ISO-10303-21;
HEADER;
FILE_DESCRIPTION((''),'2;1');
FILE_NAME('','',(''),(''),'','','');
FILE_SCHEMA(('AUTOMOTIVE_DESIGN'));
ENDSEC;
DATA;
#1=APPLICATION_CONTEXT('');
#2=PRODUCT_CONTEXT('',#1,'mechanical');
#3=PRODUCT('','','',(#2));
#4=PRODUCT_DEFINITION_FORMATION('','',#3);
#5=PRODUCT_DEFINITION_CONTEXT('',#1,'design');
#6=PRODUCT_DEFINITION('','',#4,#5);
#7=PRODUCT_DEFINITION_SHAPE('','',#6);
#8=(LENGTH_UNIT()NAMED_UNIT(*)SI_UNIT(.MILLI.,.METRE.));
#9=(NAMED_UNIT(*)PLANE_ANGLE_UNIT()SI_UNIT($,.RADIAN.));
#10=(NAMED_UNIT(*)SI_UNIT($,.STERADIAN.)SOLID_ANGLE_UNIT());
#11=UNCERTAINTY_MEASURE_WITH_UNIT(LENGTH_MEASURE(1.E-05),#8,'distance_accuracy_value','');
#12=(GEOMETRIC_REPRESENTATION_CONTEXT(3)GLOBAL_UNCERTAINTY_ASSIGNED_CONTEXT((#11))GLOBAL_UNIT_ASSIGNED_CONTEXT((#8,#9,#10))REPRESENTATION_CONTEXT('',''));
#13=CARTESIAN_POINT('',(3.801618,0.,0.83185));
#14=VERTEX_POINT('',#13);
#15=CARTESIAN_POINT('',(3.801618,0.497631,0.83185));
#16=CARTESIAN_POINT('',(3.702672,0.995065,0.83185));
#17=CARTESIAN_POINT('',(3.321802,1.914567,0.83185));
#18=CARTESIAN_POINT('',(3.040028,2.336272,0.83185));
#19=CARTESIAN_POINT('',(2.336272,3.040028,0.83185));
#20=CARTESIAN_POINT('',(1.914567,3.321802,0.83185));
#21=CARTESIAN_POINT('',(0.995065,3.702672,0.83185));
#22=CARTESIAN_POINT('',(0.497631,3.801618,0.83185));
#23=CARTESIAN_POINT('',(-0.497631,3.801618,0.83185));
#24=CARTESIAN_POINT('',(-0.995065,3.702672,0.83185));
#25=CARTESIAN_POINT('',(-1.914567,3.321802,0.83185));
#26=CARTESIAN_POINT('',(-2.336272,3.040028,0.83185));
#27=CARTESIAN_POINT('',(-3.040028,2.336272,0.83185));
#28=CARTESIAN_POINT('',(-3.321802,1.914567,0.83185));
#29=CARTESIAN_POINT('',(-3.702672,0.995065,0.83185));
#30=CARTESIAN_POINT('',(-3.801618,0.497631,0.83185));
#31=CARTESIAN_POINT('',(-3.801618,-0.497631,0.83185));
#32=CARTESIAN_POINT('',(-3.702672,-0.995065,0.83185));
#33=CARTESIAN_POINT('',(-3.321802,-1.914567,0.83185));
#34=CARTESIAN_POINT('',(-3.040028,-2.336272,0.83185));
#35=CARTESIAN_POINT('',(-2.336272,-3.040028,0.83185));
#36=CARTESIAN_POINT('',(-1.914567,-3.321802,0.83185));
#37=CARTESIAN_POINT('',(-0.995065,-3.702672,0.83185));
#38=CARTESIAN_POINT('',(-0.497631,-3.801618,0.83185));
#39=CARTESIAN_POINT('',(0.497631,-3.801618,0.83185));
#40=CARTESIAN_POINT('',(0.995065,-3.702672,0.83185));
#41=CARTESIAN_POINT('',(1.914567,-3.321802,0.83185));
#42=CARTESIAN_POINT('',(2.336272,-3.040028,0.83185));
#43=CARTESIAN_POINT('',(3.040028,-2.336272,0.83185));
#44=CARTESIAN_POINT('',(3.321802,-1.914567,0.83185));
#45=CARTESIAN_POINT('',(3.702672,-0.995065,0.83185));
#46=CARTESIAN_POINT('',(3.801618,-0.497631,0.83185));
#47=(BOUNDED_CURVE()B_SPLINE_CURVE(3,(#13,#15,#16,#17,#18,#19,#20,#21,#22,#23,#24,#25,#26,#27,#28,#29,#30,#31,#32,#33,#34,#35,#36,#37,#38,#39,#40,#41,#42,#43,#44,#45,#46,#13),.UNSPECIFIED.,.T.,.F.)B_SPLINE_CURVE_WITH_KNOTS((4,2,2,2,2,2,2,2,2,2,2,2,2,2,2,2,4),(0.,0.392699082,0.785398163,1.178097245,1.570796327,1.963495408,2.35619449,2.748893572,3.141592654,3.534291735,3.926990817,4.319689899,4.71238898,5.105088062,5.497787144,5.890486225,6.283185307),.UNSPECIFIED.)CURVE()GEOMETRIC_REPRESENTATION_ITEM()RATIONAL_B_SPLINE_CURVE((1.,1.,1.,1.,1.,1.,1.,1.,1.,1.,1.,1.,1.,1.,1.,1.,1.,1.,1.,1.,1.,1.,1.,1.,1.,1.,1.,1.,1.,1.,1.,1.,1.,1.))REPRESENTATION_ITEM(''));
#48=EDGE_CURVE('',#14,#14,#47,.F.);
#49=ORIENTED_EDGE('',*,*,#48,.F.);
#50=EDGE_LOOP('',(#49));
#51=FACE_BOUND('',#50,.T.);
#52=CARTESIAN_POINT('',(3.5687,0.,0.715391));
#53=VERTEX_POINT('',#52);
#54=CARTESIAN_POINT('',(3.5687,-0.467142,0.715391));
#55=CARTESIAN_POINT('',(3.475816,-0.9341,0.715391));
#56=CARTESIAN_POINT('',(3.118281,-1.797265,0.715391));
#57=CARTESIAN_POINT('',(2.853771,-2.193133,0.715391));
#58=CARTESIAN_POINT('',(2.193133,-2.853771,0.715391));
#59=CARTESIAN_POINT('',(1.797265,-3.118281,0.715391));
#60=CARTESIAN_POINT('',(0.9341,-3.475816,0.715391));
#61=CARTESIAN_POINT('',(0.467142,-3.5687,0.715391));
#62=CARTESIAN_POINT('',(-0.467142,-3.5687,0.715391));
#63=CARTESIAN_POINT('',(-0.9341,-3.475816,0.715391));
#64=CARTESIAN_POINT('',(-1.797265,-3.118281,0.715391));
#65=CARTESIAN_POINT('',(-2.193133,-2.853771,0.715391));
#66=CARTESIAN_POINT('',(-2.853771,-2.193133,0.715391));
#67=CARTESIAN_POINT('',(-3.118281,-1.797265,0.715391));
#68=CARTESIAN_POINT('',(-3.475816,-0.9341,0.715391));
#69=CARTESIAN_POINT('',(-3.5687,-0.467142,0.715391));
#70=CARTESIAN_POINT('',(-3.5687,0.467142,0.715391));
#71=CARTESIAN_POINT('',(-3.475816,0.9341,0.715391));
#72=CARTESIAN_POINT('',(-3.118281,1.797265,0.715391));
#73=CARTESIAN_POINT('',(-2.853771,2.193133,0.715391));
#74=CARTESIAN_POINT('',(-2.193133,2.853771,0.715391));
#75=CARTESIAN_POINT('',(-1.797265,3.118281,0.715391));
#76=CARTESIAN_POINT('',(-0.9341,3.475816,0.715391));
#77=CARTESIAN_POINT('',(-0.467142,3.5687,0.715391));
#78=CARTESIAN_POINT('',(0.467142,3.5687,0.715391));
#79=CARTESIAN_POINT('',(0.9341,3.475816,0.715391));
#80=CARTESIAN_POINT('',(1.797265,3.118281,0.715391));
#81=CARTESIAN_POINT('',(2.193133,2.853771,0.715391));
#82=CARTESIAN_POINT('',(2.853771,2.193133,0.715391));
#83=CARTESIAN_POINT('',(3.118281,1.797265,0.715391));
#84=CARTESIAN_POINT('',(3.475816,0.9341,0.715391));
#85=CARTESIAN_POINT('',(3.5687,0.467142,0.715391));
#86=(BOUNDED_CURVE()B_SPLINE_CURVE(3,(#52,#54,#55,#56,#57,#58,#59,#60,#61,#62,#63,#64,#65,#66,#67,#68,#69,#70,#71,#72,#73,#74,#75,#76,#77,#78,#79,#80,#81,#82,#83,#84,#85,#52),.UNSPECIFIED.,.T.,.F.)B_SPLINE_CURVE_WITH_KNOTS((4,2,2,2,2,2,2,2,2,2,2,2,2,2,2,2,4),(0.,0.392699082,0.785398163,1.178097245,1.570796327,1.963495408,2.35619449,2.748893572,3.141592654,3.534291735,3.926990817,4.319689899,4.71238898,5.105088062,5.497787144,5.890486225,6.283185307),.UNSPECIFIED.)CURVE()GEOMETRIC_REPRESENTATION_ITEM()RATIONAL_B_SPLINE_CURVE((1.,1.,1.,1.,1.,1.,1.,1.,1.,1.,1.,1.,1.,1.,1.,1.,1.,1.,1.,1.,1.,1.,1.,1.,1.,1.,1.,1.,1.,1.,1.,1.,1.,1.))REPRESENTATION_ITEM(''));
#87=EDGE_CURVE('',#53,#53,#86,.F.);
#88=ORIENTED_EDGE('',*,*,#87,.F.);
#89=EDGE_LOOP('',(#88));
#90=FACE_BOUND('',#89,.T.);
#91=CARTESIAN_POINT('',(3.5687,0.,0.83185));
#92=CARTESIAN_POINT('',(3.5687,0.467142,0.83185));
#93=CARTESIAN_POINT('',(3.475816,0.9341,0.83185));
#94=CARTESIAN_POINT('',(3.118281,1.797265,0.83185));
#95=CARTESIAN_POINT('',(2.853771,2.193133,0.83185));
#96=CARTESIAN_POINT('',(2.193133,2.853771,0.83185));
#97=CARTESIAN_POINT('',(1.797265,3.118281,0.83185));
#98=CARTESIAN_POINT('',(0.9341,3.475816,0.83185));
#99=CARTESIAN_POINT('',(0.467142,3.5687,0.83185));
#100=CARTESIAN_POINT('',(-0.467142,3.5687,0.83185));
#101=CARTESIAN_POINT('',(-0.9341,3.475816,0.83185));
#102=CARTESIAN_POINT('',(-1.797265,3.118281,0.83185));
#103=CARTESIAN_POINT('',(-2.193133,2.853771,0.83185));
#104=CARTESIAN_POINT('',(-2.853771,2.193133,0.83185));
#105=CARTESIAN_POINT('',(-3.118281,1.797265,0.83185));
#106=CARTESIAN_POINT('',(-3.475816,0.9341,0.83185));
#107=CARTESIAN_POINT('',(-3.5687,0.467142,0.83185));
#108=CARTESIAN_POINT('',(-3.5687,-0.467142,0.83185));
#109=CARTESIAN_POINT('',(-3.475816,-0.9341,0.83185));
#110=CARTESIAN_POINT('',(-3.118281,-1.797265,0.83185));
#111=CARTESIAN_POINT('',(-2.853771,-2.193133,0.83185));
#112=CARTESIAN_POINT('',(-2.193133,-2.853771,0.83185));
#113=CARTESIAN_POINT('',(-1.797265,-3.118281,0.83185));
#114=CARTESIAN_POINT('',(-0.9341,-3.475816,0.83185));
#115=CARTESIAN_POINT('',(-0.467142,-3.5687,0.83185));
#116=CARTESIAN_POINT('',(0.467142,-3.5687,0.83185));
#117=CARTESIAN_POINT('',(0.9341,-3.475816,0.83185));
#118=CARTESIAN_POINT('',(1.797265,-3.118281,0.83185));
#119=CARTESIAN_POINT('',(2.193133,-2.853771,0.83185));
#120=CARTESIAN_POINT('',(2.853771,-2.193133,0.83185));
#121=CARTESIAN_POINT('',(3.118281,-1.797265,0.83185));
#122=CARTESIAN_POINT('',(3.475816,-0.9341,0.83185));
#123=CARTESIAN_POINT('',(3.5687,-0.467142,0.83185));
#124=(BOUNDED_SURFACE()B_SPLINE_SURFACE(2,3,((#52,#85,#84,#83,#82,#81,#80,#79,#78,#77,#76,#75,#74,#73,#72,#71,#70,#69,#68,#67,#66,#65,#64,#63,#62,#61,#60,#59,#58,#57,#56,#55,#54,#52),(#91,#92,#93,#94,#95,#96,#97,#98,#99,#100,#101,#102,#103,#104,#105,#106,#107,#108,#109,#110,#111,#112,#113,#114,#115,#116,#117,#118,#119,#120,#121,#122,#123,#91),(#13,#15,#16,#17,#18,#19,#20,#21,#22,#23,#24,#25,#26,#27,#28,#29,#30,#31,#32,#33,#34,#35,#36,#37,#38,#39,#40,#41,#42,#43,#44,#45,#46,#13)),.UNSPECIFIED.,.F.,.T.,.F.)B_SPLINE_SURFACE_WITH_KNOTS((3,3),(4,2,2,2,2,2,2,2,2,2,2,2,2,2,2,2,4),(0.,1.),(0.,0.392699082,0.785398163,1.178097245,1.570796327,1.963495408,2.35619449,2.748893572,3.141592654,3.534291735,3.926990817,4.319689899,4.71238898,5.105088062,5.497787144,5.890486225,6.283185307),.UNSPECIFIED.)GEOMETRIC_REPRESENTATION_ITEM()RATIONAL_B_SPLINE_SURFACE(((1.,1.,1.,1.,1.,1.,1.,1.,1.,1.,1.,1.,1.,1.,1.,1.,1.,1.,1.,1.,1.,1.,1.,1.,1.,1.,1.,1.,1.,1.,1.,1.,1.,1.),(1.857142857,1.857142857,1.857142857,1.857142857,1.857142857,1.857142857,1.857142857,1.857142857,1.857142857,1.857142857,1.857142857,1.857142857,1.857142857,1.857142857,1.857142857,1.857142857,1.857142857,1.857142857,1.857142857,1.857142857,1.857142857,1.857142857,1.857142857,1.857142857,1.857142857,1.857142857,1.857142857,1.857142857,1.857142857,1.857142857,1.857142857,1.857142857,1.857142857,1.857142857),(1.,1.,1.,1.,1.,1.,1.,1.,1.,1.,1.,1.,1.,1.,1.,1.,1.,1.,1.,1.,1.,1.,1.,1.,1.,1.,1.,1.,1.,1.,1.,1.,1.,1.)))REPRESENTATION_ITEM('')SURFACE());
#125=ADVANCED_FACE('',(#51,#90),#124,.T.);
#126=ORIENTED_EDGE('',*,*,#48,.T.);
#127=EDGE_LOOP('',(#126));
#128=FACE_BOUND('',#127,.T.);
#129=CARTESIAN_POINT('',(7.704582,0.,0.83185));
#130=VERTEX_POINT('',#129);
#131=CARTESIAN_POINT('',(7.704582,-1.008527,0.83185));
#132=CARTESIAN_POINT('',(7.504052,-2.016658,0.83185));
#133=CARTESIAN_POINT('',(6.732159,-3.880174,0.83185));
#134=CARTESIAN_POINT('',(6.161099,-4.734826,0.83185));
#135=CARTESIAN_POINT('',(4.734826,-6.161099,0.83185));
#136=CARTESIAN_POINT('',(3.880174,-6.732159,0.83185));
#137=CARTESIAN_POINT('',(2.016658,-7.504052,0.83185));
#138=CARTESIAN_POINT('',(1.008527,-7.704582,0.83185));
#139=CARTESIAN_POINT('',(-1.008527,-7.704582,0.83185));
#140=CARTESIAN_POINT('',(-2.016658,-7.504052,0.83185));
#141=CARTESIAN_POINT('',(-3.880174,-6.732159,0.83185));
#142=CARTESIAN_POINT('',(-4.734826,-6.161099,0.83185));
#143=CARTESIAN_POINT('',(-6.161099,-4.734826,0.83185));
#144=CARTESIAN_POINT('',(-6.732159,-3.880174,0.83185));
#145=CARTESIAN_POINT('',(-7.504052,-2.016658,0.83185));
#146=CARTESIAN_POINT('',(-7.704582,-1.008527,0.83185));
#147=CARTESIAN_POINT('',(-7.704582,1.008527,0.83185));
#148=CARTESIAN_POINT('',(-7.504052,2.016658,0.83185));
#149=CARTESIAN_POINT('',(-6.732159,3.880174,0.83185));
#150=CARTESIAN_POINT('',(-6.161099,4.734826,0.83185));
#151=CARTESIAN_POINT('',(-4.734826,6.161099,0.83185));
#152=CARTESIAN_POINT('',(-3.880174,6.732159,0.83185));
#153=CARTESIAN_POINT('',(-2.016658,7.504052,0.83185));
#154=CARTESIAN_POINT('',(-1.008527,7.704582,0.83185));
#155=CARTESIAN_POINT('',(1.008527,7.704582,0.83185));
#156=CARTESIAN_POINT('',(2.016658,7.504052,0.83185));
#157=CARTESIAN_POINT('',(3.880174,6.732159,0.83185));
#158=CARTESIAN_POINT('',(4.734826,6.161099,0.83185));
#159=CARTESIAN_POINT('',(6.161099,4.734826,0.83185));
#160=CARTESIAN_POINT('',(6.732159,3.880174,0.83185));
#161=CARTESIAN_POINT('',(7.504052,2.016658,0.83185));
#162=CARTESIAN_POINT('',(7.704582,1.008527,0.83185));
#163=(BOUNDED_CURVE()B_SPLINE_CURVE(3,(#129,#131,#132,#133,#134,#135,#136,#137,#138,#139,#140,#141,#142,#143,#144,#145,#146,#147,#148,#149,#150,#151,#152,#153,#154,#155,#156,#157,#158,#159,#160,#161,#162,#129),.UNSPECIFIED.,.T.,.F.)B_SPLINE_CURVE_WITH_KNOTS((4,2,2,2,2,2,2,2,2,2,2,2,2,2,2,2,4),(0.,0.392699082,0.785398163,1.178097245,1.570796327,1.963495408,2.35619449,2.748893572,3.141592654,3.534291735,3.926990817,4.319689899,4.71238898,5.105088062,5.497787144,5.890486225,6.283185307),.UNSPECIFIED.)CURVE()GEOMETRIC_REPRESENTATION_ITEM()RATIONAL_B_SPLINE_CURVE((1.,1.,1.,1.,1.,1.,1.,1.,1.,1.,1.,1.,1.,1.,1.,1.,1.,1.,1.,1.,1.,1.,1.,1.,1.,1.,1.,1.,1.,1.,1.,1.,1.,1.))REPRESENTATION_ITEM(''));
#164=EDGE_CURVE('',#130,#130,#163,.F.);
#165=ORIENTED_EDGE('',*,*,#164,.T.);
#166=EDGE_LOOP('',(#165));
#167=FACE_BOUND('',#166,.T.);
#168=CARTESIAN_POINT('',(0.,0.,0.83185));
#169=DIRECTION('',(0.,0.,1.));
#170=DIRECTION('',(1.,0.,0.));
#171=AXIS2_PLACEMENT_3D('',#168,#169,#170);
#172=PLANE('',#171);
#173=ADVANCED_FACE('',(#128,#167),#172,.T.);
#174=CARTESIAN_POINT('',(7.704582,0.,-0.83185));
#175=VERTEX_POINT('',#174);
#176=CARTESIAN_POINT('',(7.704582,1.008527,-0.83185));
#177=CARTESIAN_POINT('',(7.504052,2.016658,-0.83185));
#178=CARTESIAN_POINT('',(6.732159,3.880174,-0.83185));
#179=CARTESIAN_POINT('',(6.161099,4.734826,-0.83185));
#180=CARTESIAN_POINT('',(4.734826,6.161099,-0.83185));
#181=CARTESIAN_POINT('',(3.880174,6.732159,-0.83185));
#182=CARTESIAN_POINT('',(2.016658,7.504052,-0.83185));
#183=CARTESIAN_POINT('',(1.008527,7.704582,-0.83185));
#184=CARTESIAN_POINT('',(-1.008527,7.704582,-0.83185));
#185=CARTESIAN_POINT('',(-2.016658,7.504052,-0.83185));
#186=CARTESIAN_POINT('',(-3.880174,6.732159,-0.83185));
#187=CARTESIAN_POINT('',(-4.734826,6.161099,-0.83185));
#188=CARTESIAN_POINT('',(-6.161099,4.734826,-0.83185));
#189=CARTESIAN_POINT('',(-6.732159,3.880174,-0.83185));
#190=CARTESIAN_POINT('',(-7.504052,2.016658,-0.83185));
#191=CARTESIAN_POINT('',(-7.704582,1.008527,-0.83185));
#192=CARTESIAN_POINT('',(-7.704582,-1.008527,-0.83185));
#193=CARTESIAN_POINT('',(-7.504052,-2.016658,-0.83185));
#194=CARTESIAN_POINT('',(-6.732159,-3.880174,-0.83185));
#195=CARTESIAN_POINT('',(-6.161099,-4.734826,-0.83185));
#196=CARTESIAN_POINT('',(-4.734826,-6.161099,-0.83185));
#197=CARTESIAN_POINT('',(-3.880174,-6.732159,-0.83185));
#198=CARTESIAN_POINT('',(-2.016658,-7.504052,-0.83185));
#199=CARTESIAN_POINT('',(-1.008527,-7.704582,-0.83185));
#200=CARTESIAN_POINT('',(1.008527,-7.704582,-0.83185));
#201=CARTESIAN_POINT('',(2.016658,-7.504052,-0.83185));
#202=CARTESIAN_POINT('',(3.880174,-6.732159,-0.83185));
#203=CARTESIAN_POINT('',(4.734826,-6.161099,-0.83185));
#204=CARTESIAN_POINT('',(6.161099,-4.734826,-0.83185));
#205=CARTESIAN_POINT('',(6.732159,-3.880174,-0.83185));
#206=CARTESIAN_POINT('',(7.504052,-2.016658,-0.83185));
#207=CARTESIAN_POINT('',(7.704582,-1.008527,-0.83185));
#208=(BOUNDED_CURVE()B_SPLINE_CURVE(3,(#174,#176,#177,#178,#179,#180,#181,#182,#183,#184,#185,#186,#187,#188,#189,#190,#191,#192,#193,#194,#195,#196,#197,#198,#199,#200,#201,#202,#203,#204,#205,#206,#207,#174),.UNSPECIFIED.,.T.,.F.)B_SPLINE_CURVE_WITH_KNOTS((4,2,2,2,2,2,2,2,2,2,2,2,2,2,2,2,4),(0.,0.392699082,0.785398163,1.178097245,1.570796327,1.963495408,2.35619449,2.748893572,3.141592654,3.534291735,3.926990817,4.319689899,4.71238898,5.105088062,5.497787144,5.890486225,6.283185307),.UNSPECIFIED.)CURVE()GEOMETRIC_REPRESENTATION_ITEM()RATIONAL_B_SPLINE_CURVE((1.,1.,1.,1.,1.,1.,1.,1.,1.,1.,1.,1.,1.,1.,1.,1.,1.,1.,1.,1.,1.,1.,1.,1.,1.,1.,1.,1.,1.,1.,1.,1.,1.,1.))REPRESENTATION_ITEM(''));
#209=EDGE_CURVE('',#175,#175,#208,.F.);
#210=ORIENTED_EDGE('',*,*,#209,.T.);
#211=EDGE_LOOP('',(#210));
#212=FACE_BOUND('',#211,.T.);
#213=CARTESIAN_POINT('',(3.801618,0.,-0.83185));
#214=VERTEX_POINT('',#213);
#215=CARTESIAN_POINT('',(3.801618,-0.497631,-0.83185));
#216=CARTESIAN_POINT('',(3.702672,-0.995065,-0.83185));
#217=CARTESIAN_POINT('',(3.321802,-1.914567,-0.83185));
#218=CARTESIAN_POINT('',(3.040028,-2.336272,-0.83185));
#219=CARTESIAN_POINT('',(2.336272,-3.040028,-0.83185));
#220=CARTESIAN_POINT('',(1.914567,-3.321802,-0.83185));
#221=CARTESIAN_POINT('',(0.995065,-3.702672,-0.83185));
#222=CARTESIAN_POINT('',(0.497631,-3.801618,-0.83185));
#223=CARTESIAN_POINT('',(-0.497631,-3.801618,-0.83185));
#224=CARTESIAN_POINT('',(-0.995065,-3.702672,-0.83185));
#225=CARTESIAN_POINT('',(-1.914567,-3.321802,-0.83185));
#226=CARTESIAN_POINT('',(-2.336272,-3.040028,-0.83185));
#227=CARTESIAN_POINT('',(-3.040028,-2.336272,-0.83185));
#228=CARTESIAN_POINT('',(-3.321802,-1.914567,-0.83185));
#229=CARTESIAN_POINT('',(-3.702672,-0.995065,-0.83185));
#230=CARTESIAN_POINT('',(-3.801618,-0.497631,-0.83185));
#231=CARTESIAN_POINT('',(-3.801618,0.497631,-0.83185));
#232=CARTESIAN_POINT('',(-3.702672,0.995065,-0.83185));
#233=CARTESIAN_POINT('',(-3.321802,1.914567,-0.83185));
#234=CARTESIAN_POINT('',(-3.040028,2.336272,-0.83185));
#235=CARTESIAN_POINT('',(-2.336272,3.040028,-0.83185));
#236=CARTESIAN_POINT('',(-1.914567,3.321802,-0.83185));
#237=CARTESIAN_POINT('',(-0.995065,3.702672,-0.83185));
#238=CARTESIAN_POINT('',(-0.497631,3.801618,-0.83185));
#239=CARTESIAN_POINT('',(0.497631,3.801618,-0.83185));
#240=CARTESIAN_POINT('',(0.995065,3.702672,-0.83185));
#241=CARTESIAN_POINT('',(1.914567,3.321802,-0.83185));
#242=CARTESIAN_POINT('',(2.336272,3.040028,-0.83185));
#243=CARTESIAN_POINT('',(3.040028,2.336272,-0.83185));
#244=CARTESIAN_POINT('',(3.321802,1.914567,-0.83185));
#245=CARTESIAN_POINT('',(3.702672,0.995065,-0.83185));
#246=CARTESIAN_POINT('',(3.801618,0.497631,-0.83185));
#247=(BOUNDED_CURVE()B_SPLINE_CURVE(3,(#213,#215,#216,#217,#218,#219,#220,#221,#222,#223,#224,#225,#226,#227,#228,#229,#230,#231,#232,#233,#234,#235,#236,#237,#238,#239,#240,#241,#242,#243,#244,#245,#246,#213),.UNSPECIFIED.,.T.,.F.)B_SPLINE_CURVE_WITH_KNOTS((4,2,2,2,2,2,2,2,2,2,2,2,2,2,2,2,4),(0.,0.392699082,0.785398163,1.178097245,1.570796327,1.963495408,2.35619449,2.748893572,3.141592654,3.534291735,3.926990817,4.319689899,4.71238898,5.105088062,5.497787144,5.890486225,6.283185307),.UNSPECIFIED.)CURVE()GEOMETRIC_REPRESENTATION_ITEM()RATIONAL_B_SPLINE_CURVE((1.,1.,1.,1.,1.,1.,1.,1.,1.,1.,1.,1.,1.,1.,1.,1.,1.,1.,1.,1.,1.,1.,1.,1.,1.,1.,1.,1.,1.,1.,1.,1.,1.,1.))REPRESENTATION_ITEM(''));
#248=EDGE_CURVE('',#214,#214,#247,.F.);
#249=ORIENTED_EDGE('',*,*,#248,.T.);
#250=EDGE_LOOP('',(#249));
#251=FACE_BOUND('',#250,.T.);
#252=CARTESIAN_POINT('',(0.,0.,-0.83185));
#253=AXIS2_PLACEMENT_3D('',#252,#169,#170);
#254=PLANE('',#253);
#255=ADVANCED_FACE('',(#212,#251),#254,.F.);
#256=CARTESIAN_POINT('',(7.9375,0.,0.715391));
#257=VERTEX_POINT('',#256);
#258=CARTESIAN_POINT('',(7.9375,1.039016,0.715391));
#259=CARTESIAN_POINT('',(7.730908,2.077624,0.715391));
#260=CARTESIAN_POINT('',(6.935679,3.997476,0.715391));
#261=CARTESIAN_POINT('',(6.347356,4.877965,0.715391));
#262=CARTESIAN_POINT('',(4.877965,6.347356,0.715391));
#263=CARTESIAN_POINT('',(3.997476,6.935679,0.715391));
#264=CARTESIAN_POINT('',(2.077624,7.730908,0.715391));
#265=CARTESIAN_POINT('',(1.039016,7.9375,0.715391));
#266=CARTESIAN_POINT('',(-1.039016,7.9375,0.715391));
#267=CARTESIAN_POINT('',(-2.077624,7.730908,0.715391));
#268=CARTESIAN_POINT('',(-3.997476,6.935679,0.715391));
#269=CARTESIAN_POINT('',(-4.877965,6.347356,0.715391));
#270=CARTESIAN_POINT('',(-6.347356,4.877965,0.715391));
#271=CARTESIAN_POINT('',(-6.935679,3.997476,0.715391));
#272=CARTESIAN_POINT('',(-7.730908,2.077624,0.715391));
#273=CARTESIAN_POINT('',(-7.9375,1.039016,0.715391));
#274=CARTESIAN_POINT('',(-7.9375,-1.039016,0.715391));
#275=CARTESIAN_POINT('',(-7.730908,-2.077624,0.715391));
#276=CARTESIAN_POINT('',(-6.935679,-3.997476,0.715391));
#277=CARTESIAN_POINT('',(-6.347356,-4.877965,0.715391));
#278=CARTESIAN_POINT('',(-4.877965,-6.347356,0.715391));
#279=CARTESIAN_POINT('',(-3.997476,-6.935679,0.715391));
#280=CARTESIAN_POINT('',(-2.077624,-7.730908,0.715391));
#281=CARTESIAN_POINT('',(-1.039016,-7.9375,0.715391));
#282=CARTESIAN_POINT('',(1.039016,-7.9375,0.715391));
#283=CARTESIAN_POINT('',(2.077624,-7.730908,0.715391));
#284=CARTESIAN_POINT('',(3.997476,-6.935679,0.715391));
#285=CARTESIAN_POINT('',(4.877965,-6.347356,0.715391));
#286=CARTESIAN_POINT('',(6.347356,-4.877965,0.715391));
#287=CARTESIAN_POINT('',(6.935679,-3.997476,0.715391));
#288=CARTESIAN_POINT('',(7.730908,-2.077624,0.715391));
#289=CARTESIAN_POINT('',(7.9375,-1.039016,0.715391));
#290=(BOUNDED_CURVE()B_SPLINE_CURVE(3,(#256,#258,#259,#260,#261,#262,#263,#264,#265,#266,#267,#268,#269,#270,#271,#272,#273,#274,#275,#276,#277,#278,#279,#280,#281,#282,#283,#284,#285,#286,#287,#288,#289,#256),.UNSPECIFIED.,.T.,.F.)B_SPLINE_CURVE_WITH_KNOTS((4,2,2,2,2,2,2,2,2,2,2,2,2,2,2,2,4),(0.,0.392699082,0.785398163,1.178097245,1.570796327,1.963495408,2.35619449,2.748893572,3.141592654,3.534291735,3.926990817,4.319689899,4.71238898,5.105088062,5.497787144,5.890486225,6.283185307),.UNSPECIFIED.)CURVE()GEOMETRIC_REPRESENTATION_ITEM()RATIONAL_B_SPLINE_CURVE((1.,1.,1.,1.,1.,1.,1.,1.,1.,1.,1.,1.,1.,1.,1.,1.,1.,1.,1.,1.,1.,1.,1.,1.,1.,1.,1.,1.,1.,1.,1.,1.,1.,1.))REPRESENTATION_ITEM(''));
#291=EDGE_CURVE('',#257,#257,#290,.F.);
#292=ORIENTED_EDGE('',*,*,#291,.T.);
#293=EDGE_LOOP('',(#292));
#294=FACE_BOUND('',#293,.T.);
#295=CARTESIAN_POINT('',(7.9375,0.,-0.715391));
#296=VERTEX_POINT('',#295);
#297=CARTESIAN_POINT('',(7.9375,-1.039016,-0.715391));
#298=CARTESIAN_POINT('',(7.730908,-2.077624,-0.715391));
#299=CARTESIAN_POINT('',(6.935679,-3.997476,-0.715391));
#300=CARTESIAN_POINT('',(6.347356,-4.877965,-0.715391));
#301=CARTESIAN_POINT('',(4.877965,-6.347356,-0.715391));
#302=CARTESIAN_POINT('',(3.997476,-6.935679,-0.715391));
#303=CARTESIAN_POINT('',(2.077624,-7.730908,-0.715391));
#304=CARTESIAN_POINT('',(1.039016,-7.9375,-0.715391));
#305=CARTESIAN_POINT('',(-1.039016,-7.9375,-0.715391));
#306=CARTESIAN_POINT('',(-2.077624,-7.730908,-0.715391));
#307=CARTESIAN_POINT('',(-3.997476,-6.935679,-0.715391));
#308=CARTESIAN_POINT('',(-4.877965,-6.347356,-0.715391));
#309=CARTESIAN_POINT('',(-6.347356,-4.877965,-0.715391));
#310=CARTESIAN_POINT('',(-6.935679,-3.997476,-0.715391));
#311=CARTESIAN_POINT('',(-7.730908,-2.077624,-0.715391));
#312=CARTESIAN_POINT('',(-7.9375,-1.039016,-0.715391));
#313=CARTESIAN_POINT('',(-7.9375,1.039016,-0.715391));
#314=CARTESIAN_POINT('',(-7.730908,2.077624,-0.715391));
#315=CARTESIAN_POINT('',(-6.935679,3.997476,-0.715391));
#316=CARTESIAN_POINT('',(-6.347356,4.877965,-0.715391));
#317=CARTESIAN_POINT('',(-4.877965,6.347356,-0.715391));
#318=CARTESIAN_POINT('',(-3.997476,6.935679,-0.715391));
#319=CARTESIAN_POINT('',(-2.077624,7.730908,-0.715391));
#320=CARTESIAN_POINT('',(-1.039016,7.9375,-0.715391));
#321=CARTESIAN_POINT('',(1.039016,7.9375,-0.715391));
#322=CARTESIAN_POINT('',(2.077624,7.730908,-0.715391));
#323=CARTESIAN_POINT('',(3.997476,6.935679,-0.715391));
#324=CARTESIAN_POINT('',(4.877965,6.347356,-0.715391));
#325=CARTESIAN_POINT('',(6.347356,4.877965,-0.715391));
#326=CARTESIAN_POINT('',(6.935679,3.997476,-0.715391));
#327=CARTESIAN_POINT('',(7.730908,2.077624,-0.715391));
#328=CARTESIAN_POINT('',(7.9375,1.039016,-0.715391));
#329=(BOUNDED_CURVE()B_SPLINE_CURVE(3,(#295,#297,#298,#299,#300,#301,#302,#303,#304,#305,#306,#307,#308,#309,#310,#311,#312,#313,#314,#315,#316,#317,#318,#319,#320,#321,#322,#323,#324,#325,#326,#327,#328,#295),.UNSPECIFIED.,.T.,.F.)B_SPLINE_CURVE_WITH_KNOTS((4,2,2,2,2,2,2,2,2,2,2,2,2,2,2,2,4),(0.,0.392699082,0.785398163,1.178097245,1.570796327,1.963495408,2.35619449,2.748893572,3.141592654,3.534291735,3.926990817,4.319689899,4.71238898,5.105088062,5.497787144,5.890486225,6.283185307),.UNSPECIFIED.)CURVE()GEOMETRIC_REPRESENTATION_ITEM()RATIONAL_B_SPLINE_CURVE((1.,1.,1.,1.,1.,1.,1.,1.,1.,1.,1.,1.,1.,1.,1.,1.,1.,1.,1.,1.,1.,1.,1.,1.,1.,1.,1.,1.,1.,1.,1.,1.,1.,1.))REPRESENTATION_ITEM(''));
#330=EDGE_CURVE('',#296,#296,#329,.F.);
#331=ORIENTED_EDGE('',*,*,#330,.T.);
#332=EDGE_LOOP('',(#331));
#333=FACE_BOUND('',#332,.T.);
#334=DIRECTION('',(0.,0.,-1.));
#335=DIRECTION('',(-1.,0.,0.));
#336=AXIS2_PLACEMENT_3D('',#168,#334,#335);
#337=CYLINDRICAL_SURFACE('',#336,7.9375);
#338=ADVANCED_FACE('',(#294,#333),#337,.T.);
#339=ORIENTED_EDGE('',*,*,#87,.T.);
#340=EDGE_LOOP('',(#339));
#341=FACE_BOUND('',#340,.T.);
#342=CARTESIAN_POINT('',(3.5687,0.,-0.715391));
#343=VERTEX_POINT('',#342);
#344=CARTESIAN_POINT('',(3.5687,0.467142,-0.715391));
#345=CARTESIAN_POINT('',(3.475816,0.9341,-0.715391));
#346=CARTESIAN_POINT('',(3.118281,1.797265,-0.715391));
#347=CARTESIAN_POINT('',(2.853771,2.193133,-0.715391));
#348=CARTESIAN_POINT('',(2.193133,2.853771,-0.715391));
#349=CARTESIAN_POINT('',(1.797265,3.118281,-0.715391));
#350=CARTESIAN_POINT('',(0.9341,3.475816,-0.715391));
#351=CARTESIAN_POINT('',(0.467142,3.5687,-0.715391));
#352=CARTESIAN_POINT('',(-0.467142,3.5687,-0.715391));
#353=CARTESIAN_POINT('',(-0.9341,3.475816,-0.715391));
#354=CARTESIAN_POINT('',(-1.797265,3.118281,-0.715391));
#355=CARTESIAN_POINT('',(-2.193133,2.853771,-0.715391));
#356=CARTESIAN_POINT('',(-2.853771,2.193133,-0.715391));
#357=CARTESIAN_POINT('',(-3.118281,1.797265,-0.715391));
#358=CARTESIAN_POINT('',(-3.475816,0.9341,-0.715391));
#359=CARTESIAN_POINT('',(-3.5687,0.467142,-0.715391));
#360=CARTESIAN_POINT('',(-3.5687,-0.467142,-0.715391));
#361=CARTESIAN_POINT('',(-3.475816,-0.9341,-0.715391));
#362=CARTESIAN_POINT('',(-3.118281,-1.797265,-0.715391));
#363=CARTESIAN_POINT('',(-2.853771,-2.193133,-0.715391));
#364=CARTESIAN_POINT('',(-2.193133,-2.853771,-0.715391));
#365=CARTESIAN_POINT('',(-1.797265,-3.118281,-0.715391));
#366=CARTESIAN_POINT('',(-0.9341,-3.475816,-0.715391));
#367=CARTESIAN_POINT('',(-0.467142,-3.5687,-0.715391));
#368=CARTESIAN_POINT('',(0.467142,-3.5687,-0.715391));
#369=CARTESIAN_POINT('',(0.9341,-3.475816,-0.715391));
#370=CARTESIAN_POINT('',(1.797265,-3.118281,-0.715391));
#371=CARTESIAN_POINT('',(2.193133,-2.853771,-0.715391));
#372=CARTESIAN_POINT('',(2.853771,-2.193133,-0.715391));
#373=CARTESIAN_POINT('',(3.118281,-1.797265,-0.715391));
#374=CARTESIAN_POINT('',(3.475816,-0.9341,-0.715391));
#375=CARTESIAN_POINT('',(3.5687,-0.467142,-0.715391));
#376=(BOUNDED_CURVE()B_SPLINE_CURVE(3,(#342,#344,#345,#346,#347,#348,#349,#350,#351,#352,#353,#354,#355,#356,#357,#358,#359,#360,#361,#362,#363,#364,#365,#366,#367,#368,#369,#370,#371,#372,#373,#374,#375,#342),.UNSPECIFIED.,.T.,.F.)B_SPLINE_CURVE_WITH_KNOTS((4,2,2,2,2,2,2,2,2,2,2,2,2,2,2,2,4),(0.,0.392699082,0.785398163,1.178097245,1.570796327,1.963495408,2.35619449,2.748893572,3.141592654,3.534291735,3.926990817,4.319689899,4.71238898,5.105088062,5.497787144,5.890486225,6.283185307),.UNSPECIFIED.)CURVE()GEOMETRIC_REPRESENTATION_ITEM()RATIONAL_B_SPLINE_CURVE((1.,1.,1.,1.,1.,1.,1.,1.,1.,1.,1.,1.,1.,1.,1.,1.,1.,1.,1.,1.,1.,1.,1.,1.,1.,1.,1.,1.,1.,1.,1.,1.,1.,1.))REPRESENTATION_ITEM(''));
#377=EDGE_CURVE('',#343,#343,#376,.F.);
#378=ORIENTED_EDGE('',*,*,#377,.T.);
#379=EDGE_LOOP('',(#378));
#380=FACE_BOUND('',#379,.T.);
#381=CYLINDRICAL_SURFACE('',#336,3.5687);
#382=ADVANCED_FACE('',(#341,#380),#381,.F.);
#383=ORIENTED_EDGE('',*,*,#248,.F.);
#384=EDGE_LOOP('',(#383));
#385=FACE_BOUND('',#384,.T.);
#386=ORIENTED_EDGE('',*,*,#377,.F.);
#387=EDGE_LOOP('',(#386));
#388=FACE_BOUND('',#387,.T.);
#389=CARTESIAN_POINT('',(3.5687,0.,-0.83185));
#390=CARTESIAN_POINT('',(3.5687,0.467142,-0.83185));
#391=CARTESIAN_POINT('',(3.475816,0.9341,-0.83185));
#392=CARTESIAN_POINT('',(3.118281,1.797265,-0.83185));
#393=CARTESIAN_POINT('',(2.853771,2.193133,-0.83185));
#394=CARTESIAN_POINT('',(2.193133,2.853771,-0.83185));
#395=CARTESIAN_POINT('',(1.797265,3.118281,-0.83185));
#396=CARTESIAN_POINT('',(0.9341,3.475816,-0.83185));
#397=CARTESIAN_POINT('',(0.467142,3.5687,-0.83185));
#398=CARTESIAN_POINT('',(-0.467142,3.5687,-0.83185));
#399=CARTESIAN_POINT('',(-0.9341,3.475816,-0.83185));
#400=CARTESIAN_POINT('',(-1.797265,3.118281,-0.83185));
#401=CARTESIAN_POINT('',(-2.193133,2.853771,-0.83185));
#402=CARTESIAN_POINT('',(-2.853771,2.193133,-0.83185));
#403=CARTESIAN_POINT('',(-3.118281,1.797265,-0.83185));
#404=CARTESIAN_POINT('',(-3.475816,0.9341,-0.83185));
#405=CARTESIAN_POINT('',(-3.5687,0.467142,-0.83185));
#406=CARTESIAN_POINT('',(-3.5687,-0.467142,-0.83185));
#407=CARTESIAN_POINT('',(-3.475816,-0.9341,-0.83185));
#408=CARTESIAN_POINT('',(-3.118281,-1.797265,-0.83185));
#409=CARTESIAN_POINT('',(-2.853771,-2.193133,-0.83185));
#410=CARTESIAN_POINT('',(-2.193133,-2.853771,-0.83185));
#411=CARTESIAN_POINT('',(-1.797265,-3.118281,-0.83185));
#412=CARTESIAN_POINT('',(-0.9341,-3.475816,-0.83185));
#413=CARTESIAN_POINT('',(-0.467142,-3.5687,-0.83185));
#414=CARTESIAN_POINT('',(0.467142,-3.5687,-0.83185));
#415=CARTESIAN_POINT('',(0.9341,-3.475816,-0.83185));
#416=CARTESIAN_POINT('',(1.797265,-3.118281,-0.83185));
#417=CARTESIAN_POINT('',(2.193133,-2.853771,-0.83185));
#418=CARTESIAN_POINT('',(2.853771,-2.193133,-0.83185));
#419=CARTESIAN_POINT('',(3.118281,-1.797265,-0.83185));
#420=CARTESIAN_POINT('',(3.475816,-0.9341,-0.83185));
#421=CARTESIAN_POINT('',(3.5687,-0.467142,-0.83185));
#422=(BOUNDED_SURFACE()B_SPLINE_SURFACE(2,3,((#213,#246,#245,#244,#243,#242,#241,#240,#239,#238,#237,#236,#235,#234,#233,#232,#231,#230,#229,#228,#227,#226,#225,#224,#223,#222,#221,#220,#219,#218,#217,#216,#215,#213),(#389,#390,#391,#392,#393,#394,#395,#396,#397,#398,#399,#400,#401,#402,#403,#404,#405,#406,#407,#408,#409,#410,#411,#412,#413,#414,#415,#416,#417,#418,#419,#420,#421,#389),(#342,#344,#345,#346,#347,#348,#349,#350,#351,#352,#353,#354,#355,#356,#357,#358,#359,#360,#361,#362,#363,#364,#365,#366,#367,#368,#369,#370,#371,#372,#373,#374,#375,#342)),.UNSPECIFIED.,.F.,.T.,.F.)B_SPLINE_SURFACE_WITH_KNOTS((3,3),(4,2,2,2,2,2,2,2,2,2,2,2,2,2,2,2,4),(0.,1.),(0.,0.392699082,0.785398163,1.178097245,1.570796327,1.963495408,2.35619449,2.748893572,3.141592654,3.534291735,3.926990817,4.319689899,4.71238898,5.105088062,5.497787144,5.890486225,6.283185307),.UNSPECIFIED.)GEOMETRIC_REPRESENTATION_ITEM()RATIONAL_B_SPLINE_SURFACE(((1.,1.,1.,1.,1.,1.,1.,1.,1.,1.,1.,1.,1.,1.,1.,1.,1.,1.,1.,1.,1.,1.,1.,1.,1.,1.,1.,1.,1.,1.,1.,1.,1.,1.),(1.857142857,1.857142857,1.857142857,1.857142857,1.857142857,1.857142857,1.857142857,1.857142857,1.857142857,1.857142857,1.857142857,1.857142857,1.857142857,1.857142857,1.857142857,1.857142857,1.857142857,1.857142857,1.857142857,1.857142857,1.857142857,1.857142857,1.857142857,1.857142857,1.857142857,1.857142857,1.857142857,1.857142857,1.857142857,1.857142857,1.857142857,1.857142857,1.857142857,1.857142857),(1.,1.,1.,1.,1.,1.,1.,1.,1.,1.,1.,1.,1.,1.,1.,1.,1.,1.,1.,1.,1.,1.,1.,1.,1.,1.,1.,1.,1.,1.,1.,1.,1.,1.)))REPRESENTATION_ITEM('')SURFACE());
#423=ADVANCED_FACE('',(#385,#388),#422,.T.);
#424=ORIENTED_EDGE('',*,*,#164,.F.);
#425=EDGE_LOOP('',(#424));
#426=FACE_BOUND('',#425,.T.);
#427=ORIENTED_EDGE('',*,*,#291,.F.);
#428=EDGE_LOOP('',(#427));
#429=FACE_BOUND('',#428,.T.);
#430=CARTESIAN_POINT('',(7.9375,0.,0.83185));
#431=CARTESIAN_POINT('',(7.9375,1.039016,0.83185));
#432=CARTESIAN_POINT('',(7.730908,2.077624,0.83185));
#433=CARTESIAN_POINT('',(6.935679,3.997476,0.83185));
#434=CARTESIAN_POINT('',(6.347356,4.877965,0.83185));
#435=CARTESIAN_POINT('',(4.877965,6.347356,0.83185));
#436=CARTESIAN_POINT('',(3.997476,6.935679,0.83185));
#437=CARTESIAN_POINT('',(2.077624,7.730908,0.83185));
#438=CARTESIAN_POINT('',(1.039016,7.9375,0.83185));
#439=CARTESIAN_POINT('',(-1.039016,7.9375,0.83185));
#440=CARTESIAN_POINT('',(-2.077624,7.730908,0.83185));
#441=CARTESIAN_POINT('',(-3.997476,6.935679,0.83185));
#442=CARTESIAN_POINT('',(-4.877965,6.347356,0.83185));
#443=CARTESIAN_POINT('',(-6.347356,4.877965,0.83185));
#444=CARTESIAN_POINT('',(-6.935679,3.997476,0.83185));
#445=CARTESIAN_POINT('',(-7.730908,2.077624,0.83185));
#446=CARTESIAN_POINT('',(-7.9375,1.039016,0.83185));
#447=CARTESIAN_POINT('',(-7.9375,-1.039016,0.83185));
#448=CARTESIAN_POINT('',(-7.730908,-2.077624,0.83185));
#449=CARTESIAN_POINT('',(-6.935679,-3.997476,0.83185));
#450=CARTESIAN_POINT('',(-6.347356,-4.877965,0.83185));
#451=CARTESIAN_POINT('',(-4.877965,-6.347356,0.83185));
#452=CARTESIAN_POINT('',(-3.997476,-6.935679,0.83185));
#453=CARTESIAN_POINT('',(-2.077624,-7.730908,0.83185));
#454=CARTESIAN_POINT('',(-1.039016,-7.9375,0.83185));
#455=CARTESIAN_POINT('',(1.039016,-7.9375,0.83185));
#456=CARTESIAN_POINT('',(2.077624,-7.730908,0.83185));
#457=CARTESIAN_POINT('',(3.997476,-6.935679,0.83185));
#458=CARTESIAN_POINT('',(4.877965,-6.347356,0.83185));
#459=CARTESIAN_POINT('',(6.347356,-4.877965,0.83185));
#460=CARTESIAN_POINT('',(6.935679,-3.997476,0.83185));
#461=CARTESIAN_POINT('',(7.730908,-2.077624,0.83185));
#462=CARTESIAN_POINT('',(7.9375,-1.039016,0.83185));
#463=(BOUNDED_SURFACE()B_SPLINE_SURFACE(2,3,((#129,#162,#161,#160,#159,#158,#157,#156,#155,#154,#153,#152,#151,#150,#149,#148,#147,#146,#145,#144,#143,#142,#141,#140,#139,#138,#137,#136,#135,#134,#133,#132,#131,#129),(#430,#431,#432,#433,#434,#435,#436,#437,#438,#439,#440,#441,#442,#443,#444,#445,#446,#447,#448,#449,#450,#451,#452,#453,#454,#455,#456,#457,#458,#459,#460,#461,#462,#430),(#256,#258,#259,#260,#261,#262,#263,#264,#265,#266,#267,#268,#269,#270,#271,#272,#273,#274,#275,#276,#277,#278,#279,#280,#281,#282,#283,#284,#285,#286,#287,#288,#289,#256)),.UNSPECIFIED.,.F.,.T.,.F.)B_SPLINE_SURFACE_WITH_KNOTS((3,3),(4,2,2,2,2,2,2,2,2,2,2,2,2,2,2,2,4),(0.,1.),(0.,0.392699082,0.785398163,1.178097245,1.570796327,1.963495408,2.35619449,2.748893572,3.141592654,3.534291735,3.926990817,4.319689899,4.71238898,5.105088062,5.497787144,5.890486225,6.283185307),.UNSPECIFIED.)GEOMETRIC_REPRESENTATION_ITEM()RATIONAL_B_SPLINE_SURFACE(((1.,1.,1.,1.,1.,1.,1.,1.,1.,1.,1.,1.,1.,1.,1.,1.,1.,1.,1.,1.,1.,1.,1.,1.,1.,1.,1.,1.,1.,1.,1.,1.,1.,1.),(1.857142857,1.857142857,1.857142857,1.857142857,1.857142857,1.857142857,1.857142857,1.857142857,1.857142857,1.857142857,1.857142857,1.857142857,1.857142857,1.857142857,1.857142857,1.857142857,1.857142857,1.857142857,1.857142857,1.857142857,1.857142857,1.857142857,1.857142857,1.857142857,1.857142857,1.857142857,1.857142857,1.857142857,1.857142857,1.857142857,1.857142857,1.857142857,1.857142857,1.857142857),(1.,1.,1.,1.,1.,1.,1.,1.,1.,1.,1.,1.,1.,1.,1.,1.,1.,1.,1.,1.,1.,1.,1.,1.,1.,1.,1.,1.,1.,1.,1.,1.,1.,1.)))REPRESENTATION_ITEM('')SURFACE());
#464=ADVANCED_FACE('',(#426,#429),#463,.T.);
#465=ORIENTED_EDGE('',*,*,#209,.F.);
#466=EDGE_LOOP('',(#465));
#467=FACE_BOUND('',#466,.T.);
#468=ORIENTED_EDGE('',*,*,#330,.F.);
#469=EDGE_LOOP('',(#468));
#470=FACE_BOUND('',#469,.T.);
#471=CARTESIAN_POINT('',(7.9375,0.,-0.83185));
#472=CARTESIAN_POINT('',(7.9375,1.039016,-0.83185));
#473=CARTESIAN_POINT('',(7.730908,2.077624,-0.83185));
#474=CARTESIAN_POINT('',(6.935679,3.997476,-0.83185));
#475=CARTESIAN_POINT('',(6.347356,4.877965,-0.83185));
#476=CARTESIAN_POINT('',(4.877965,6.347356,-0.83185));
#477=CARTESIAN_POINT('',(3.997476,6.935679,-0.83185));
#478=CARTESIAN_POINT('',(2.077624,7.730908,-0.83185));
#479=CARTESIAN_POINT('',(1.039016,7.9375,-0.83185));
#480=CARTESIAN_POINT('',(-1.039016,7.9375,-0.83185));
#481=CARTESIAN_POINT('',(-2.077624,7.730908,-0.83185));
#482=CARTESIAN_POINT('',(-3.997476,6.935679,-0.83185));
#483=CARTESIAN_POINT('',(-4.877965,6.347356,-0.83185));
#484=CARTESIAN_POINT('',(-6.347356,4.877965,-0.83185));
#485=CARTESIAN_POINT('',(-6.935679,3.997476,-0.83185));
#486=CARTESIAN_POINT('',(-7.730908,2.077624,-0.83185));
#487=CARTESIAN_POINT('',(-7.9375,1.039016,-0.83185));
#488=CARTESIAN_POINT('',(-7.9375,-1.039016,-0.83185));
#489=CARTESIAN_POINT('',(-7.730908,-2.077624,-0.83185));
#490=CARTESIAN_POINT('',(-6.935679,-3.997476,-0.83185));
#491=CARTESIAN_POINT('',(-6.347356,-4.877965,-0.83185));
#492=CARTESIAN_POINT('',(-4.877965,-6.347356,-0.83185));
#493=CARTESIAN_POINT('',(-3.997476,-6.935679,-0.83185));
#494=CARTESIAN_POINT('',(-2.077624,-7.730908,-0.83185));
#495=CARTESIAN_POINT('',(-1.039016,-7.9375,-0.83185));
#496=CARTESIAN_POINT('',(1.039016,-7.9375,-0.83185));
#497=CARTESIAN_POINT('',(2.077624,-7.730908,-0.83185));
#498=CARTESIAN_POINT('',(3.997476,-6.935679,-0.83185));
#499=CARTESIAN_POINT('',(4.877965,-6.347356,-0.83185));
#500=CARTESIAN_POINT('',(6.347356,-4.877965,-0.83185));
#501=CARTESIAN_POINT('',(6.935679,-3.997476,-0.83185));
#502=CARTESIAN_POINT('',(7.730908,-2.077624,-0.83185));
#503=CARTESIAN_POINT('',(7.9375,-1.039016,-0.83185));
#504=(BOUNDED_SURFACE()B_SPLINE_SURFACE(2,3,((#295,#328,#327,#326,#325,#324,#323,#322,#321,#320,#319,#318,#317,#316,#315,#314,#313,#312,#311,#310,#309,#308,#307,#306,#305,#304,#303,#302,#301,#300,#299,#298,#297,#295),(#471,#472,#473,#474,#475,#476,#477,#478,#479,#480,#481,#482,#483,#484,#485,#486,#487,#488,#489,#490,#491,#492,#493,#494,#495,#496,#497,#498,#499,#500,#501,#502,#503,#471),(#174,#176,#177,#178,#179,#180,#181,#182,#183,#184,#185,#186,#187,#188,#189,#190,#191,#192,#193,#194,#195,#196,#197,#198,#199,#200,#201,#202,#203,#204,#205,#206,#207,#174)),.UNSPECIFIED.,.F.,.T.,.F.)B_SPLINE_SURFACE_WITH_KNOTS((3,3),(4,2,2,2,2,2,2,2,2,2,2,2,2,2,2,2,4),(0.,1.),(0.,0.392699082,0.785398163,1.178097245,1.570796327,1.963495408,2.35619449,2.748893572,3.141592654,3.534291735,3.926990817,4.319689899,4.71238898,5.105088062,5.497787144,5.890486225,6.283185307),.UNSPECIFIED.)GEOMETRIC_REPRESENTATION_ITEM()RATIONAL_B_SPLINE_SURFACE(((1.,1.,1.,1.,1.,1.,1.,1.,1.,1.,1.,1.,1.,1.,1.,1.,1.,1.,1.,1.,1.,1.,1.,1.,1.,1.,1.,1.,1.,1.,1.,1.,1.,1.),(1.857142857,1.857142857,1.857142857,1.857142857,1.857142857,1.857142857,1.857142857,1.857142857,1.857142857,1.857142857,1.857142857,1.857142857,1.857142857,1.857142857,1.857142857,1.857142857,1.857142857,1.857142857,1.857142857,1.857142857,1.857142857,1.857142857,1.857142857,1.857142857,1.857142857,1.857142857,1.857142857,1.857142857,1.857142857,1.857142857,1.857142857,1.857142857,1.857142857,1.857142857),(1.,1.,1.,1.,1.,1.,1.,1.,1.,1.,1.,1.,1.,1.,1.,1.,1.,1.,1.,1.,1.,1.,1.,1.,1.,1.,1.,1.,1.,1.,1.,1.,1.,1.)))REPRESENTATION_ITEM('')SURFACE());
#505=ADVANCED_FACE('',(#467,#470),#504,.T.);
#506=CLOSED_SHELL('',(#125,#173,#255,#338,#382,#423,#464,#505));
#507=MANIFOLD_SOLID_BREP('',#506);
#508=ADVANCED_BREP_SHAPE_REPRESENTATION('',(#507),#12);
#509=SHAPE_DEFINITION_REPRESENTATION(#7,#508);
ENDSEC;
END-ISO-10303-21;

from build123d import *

# Parameters (mm, degrees)
SKETCH3_R           = 7.9375
SKETCH3_R_2         = 3.5687
BOSS_EXTRUDE1_DEPTH = 0.83185
FILLET1_SIZE        = 0.116459
FILLET1_SIZE_2      = 0.232918


with BuildPart() as part:
    # Sketch3 → Boss-Extrude1 (new, symmetric)
    with BuildSketch(Plane.XY):
        Circle(SKETCH3_R)
        Circle(SKETCH3_R_2, mode=Mode.SUBTRACT)
    extrude(amount=BOSS_EXTRUDE1_DEPTH, both=True)

    # Fillet1
    # a fillet whose section is not a circle: 0.232918, 0.116459 mm, written as the material it takes off along each edge
    with BuildSketch(Plane(origin=(0, 0, -0.83185), x_dir=(1, 0, 0), z_dir=(0, -1, 0))) as fillet1_piece_1:
        with BuildLine():
            Bezier((7.9375, FILLET1_SIZE), (7.9375, 0), (7.9375 - FILLET1_SIZE_2, 0), weights=[1, 1.857142857, 1])
            Line((7.9375 - FILLET1_SIZE_2, 0), (7.9375, 0))
            Line((7.9375, 0), (7.9375, FILLET1_SIZE))
        make_face()
    revolve(axis=Axis((0, 0, -0.83185), (0, 0, 1)), mode=Mode.SUBTRACT)
    with BuildSketch(Plane(origin=(0, 0, 0.83185), x_dir=(1, 0, 0), z_dir=(0, -1, 0))) as fillet1_piece_2:
        with BuildLine():
            Bezier((7.9375, -FILLET1_SIZE), (7.9375, 0), (7.9375 - FILLET1_SIZE_2, 0), weights=[1, 1.857142857, 1])
            Line((7.9375 - FILLET1_SIZE_2, 0), (7.9375, 0))
            Line((7.9375, 0), (7.9375, -FILLET1_SIZE))
        make_face()
    revolve(axis=Axis((0, 0, 0.83185), (0, 0, 1)), mode=Mode.SUBTRACT)
    with BuildSketch(Plane(origin=(0, 0, -0.83185), x_dir=(1, 0, 0), z_dir=(0, -1, 0))) as fillet1_piece_3:
        with BuildLine():
            Bezier((3.5687, FILLET1_SIZE), (3.5687, 0), (3.5687 + FILLET1_SIZE_2, 0), weights=[1, 1.857142857, 1])
            Line((3.5687 + FILLET1_SIZE_2, 0), (3.5687, 0))
            Line((3.5687, 0), (3.5687, FILLET1_SIZE))
        make_face()
    revolve(axis=Axis((0, 0, -0.83185), (0, 0, 1)), mode=Mode.SUBTRACT)
    with BuildSketch(Plane(origin=(0, 0, 0.83185), x_dir=(1, 0, 0), z_dir=(0, -1, 0))) as fillet1_piece_4:
        with BuildLine():
            Bezier((3.5687 + FILLET1_SIZE_2, 0), (3.5687, 0), (3.5687, -FILLET1_SIZE), weights=[1, 1.857142857, 1])
            Line((3.5687, -FILLET1_SIZE), (3.5687, 0))
            Line((3.5687, 0), (3.5687 + FILLET1_SIZE_2, 0))
        make_face()
    revolve(axis=Axis((0, 0, 0.83185), (0, 0, 1)), mode=Mode.SUBTRACT)


solid = part.part
